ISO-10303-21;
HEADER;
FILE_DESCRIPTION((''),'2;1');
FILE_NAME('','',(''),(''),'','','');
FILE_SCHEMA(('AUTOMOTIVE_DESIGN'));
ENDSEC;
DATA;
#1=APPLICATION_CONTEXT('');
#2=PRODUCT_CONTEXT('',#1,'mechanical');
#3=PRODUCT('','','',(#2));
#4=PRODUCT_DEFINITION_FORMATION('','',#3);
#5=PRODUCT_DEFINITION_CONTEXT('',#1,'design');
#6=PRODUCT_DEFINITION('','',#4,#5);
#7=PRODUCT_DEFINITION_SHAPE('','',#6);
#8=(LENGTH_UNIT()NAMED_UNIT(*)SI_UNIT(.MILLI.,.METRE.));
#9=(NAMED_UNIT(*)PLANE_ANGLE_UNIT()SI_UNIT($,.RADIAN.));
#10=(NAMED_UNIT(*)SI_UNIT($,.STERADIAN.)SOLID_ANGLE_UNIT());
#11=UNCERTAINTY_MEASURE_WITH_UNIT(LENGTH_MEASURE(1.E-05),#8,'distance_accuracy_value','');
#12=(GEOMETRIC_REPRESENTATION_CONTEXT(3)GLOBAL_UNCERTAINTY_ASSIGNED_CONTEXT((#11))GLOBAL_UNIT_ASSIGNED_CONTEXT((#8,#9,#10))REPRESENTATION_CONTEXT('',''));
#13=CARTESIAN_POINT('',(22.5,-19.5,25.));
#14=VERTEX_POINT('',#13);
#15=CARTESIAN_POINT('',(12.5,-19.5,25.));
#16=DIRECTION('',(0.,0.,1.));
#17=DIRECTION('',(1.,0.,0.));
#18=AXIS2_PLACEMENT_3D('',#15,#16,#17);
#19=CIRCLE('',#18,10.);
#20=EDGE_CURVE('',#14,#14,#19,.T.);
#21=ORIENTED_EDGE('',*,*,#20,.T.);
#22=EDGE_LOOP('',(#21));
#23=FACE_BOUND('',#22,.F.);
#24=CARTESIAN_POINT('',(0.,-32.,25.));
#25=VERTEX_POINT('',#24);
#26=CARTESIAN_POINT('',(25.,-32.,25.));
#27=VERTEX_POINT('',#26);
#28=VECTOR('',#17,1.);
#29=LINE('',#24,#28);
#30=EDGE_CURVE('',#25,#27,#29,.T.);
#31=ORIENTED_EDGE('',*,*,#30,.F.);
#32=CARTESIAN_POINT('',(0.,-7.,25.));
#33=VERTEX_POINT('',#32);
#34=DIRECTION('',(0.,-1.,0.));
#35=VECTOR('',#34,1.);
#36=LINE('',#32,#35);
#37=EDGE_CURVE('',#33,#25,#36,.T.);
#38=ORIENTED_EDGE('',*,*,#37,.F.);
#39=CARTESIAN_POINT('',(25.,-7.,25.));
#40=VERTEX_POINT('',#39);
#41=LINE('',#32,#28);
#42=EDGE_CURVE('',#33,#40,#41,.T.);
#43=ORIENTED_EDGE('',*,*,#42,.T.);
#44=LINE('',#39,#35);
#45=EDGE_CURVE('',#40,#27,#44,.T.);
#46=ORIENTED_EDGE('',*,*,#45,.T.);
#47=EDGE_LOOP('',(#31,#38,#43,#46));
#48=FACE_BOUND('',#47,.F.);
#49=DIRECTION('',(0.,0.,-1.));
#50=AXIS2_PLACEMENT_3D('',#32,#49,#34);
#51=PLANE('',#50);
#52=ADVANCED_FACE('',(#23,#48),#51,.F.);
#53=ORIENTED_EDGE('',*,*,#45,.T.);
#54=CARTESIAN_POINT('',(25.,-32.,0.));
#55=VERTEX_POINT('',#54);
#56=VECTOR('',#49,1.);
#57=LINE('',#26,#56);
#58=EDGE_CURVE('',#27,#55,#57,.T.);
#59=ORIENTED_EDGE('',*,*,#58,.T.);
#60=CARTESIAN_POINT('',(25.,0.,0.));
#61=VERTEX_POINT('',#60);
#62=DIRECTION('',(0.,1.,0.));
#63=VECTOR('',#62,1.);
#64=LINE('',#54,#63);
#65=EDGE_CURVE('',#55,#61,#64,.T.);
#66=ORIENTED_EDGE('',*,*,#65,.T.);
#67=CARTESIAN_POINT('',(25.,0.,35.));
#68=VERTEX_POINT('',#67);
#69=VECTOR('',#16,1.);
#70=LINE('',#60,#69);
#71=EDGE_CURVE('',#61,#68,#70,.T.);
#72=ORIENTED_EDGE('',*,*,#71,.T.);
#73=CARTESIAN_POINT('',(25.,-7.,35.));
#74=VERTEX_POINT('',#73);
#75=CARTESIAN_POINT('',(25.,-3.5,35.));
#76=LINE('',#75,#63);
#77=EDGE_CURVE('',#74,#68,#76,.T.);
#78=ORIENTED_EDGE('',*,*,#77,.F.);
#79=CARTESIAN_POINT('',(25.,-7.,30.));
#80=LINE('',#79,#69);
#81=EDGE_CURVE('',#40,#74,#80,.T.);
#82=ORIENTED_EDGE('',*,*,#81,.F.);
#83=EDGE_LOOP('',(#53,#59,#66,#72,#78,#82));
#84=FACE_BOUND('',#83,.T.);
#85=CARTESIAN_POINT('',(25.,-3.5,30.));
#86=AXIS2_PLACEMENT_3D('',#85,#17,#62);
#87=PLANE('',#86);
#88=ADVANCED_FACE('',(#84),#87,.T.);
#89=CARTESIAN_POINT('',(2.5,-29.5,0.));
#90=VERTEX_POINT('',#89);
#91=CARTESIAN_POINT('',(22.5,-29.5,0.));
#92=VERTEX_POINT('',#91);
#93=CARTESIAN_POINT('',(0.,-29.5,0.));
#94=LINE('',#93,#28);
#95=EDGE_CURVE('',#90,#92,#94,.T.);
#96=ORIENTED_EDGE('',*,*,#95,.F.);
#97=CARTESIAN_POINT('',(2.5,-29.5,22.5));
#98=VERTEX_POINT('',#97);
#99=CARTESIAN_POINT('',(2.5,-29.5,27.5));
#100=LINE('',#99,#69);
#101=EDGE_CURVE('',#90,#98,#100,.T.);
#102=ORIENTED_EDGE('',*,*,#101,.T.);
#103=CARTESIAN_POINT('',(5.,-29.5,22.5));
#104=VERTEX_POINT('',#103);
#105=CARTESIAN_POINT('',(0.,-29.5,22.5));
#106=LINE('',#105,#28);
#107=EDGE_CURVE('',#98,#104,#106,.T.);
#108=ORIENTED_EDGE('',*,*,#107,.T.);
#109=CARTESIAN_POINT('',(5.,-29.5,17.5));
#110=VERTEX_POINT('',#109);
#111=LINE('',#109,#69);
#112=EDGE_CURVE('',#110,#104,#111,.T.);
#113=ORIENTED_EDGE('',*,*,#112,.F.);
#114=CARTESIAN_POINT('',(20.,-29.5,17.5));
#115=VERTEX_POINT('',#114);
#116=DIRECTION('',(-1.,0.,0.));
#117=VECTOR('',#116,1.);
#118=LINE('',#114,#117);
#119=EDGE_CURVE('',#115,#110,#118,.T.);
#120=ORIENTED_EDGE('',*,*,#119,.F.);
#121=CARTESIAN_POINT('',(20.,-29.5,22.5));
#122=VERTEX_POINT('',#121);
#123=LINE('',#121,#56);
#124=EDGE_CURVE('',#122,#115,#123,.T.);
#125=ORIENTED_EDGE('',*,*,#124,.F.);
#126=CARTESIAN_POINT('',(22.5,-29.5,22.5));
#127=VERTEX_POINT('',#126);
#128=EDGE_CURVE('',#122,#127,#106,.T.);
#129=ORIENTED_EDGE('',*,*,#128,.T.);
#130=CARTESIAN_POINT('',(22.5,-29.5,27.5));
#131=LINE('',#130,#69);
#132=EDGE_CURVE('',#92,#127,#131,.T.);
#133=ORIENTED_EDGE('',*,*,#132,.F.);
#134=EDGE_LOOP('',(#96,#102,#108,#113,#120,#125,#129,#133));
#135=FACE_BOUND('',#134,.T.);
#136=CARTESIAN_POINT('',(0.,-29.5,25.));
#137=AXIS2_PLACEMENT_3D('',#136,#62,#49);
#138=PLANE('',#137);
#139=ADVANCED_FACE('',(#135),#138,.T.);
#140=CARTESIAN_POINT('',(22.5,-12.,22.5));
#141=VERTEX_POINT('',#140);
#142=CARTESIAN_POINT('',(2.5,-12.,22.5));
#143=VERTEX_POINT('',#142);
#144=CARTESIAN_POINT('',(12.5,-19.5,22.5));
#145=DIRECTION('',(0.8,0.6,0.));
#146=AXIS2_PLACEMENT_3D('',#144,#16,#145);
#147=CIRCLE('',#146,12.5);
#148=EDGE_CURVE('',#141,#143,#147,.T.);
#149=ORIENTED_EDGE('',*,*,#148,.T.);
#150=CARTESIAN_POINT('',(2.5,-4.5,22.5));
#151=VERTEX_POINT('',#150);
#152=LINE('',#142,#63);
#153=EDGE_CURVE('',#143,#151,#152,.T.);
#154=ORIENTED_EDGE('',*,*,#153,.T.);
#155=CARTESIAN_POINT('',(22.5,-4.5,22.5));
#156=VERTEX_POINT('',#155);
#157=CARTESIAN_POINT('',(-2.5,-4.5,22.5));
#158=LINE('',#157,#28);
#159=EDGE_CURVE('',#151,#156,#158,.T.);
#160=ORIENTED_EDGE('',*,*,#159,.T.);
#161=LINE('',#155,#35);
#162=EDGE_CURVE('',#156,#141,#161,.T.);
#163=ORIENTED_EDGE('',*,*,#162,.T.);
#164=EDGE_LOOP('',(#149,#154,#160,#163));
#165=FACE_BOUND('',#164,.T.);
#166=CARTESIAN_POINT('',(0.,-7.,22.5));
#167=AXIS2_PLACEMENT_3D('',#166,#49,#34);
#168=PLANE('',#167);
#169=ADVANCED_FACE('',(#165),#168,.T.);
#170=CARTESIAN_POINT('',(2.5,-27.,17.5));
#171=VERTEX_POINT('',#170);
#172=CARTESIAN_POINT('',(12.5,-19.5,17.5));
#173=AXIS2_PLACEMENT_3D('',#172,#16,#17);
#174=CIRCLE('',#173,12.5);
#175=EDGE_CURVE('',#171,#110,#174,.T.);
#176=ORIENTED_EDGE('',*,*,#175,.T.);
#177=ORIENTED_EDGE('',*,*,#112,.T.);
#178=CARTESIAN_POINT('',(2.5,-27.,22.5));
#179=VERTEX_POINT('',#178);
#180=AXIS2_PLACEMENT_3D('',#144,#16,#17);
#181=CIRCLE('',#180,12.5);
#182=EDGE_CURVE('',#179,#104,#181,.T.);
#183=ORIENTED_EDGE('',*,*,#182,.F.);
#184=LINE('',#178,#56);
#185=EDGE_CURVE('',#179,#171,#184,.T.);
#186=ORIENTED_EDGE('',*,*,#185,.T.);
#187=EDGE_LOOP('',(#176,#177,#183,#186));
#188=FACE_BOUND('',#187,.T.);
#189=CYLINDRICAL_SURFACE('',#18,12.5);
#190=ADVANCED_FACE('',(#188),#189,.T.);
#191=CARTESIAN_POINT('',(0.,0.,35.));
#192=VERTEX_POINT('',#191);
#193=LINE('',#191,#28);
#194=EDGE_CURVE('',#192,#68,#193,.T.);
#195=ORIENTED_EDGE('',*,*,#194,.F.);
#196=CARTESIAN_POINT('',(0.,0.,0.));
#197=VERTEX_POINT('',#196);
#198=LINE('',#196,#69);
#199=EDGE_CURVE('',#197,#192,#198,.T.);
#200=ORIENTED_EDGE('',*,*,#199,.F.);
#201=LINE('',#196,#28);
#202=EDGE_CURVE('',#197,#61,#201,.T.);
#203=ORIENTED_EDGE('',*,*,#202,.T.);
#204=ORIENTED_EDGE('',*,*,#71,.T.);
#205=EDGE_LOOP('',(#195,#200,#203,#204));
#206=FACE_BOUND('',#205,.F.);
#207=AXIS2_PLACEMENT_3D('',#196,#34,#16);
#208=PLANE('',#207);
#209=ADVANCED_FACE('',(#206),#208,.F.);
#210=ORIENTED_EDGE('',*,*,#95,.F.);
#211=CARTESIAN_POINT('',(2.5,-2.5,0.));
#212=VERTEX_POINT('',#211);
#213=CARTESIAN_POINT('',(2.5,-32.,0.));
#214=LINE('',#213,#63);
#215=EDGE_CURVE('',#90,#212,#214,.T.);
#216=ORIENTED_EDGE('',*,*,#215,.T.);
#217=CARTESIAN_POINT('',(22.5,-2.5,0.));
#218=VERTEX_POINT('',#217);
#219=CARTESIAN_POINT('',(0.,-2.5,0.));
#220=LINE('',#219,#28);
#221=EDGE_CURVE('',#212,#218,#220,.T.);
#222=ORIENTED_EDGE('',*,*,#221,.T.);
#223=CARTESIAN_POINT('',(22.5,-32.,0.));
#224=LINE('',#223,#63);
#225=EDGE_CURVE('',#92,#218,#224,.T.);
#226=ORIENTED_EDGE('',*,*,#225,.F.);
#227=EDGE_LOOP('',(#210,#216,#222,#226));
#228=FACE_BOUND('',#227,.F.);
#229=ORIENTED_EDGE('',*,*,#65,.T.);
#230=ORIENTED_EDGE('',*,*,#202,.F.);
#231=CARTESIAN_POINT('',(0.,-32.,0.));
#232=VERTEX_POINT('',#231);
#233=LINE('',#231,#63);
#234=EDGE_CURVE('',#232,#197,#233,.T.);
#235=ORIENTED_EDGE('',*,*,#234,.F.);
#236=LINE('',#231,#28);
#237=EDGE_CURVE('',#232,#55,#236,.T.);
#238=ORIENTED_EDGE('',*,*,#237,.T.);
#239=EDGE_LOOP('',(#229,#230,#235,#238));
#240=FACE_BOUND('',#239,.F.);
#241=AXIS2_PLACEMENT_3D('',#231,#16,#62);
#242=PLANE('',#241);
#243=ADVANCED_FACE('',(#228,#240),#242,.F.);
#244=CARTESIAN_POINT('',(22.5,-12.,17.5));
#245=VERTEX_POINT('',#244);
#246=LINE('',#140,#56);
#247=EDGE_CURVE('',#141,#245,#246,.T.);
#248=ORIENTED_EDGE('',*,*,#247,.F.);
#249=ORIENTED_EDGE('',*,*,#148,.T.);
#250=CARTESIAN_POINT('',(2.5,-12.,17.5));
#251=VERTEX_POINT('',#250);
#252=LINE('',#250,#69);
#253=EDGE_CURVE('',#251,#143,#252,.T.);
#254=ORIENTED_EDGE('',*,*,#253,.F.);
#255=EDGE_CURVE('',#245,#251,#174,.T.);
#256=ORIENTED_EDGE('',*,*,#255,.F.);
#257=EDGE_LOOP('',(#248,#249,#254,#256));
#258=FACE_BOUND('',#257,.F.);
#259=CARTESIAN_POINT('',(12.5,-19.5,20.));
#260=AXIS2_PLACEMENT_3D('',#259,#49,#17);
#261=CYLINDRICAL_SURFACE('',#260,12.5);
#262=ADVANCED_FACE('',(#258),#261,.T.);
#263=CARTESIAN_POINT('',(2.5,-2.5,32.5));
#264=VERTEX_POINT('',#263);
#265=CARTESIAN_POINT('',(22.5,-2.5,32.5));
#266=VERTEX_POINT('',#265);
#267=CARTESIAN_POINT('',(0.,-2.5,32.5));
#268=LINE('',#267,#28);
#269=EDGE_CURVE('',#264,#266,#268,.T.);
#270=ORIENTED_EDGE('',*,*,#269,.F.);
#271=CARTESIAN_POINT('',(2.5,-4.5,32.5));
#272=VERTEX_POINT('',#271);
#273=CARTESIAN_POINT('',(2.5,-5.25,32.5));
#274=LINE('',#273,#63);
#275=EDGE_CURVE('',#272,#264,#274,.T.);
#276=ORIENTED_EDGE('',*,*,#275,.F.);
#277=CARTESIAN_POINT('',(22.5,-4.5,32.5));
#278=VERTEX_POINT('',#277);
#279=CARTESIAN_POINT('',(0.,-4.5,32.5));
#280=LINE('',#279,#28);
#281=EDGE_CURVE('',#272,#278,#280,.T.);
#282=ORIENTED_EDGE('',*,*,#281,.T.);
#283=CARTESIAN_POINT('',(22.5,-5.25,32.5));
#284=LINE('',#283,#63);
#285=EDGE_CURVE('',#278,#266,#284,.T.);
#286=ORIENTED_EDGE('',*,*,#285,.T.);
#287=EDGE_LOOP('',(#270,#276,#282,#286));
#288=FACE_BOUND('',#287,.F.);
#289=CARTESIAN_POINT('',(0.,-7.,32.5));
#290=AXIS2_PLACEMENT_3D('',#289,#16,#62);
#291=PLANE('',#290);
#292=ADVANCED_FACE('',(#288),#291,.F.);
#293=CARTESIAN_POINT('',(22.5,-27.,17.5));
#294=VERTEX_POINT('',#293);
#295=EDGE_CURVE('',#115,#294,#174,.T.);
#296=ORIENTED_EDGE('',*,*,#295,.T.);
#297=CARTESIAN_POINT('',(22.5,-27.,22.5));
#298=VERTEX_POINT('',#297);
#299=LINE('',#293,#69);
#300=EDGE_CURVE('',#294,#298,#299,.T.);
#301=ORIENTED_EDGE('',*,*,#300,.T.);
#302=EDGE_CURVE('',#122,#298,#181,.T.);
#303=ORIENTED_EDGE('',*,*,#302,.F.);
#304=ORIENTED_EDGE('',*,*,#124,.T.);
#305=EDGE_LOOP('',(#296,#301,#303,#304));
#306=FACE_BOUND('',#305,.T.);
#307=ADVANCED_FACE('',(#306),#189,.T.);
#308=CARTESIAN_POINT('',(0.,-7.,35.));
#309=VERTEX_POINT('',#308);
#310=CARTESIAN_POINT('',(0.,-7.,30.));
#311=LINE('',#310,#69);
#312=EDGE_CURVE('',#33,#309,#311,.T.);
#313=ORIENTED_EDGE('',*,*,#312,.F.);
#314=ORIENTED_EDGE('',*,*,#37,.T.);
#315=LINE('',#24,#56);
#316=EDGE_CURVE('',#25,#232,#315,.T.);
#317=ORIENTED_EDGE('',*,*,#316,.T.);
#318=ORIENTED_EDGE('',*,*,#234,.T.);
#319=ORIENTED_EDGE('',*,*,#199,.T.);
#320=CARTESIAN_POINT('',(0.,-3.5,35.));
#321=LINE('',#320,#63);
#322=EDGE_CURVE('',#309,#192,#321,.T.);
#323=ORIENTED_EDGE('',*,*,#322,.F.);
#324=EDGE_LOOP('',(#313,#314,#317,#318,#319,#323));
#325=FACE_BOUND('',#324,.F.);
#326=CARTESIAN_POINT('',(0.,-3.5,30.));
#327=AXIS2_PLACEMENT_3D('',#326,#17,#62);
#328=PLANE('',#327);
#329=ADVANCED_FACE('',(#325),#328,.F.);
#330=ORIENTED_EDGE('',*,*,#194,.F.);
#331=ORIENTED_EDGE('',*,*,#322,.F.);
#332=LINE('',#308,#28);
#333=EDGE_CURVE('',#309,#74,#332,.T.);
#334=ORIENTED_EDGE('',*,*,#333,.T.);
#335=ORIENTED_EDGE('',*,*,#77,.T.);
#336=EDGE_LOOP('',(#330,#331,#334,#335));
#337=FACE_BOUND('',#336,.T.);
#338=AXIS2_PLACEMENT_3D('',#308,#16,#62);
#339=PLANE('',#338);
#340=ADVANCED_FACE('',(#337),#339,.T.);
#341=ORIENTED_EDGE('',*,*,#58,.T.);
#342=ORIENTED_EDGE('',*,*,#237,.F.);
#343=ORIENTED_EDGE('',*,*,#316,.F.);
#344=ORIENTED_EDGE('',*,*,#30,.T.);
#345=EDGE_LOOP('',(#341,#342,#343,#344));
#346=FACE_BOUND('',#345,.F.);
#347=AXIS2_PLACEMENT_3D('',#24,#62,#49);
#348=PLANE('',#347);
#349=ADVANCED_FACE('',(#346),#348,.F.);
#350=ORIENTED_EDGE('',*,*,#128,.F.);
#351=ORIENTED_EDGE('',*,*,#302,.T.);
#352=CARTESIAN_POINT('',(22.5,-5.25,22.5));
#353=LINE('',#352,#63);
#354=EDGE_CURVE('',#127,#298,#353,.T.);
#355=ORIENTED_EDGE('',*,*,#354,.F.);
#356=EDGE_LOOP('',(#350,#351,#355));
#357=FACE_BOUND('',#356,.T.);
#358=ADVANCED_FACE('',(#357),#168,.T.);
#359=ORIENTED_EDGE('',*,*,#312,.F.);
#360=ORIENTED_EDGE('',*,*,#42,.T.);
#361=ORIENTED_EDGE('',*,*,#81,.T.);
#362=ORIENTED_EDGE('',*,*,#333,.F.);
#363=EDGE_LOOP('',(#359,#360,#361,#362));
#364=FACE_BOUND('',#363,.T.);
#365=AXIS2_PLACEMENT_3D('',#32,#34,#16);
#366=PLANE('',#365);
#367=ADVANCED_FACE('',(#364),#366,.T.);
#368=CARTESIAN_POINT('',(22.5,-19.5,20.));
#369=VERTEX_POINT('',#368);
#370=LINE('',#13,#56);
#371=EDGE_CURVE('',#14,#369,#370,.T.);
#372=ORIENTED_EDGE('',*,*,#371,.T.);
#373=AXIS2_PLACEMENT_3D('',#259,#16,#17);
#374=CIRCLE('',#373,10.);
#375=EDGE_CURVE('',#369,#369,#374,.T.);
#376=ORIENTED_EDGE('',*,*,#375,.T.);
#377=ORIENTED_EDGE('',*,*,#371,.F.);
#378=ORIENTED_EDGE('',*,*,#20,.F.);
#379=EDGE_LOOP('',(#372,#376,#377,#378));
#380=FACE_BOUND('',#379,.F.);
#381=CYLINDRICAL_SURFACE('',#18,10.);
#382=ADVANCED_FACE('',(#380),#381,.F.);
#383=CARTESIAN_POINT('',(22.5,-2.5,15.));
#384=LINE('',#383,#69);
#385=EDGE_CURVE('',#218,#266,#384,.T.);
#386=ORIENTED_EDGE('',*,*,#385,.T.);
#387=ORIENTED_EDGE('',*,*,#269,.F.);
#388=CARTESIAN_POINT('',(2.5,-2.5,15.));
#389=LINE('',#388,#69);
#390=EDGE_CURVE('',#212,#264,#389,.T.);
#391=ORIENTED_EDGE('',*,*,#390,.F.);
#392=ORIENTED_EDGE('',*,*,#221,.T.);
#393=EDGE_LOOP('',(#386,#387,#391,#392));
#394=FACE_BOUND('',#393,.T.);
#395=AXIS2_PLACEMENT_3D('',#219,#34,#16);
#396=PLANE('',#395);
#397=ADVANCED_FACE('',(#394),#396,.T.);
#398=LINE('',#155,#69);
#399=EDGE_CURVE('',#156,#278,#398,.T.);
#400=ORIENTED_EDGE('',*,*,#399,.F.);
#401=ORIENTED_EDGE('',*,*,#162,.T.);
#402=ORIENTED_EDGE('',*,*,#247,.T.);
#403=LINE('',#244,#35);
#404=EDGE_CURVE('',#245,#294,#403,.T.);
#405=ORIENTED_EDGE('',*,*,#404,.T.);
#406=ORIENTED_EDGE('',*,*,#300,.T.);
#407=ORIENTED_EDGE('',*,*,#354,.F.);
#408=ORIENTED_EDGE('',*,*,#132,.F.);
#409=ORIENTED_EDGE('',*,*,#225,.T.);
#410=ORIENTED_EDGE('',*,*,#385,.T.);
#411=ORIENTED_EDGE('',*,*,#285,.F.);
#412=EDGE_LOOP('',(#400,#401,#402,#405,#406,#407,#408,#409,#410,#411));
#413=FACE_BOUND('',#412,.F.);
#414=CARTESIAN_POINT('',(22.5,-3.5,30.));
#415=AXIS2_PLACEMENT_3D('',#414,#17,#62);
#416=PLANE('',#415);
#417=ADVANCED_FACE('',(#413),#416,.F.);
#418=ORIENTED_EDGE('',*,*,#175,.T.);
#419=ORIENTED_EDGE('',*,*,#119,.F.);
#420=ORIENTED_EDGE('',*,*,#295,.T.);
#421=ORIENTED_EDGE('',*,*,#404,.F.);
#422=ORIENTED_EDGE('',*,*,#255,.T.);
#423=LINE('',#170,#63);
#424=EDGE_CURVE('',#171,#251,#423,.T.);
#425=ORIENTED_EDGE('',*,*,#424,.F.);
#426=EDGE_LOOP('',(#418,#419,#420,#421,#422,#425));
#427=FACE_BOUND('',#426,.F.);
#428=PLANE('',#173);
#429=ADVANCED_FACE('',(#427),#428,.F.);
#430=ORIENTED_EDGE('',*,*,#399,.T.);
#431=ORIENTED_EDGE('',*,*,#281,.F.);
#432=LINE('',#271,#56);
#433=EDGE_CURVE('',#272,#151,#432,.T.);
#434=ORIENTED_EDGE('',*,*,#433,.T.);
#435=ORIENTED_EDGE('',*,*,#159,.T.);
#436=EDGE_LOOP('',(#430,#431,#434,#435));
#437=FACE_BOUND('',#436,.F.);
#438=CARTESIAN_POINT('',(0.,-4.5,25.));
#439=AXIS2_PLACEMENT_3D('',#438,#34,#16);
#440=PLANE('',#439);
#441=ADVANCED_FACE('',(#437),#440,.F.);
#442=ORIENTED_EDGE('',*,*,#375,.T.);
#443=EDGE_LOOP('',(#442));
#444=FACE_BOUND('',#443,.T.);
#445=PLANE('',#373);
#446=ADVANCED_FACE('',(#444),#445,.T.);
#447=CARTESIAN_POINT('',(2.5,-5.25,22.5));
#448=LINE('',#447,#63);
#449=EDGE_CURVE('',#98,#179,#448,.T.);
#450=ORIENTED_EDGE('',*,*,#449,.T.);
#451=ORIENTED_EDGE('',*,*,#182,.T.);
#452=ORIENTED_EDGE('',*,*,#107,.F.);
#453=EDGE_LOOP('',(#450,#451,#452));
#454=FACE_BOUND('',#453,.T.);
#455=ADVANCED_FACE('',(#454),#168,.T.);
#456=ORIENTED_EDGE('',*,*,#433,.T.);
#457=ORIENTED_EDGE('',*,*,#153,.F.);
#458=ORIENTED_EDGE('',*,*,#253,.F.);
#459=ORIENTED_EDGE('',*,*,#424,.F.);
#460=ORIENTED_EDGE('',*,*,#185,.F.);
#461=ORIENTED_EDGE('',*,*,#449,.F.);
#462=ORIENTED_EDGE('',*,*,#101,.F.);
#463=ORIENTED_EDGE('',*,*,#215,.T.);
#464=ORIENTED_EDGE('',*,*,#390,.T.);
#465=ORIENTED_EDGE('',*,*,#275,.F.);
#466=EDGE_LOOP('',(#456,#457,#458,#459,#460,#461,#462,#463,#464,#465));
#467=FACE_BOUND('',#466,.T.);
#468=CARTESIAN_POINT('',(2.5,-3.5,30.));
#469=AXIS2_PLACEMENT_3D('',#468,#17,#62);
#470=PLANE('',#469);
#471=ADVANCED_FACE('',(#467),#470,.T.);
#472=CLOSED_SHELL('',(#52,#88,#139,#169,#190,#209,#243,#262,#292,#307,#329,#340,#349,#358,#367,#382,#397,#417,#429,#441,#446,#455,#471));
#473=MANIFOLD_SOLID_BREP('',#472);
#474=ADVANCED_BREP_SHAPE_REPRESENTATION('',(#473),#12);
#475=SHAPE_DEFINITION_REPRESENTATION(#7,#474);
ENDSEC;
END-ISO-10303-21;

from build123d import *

# Parameters (mm, degrees)
F0_W        = 7
F0_H        = 10
F1_DEPTH    = 25
F2_R        = 10
F3_DEPTH    = 5
F4_T        = 2.5
F4_T3_DEPTH = 30


# Not quite as in the source:
# - a shell that OpenCascade refuses in one call is made with other operations: the cavity is built on its own and cut out


with BuildPart() as f1:
    # F0 (on Right) → F1 (new body)
    with BuildSketch(Plane.YZ):
        with Locations((-3.5, 30)):
            Rectangle(F0_W, F0_H)
        Polygon((-32, 0), (0, 0), (0, 25), (-7, 25), (-32, 25), align=None)
    extrude(amount=F1_DEPTH)

    # F2 (on face) → F3 (cut)
    with BuildSketch(Plane.XY.offset(25)):
        with Locations((12.5, -19.5)):
            Circle(F2_R)
    extrude(amount=-F3_DEPTH, mode=Mode.SUBTRACT)

    # F4: shell of thickness 2.5, made by hand


with BuildPart() as f4_core1:
    # F4_t2: copy of F1
    add(f1.part)

    # the walls: a layer under each face that stays
    f4_faces = [f4_core1.faces().sort_by_distance(p)[0] for p in [
        (12.5, -3.5, 35),
        (12.5, 0, 17.5),
        (12.5, -7, 30),
        (0, -16, 17.5),
        (25, -16, 17.5),
        (20.8333333333, -11.1666666667, 25),
        (12.5, -32, 12.5),
        (2.5, -19.5, 22.5),
        (12.5, -19.5, 20),
    ]]
    thicken(f4_faces, amount=-F4_T, mode=Mode.SUBTRACT)

    # F4_s4 → F4_t3 (cut)
    with BuildSketch(Plane.YZ.offset(-2.5)):
        Polygon((-7.025, 25.025), (-4.5, 25), (-4.5, 22.5), (-7, 22.5), align=None)
    extrude(amount=F4_T3_DEPTH, mode=Mode.SUBTRACT)

    # F4_s5 → F4_t6 (revolve, cut)
    with BuildSketch(Plane.XZ.offset(19.5)):
        Polygon((22.475, 20.025), (25, 20), (25, 17.5), (22.5, 17.5), align=None)
    revolve(axis=Axis((12.5, -19.5, 20), (0, 0, 1)), mode=Mode.SUBTRACT)


with BuildPart() as f1_1:
    add(f1.part)

    # what is left inside the walls is the cavity
    f4_cavity = [f4_core1.part.solids().sort_by_distance(p)[0] for p in [
        (15.833333, -2.525, 16.25),
    ]]
    add(f4_cavity, mode=Mode.SUBTRACT)


solid = f1_1.part
